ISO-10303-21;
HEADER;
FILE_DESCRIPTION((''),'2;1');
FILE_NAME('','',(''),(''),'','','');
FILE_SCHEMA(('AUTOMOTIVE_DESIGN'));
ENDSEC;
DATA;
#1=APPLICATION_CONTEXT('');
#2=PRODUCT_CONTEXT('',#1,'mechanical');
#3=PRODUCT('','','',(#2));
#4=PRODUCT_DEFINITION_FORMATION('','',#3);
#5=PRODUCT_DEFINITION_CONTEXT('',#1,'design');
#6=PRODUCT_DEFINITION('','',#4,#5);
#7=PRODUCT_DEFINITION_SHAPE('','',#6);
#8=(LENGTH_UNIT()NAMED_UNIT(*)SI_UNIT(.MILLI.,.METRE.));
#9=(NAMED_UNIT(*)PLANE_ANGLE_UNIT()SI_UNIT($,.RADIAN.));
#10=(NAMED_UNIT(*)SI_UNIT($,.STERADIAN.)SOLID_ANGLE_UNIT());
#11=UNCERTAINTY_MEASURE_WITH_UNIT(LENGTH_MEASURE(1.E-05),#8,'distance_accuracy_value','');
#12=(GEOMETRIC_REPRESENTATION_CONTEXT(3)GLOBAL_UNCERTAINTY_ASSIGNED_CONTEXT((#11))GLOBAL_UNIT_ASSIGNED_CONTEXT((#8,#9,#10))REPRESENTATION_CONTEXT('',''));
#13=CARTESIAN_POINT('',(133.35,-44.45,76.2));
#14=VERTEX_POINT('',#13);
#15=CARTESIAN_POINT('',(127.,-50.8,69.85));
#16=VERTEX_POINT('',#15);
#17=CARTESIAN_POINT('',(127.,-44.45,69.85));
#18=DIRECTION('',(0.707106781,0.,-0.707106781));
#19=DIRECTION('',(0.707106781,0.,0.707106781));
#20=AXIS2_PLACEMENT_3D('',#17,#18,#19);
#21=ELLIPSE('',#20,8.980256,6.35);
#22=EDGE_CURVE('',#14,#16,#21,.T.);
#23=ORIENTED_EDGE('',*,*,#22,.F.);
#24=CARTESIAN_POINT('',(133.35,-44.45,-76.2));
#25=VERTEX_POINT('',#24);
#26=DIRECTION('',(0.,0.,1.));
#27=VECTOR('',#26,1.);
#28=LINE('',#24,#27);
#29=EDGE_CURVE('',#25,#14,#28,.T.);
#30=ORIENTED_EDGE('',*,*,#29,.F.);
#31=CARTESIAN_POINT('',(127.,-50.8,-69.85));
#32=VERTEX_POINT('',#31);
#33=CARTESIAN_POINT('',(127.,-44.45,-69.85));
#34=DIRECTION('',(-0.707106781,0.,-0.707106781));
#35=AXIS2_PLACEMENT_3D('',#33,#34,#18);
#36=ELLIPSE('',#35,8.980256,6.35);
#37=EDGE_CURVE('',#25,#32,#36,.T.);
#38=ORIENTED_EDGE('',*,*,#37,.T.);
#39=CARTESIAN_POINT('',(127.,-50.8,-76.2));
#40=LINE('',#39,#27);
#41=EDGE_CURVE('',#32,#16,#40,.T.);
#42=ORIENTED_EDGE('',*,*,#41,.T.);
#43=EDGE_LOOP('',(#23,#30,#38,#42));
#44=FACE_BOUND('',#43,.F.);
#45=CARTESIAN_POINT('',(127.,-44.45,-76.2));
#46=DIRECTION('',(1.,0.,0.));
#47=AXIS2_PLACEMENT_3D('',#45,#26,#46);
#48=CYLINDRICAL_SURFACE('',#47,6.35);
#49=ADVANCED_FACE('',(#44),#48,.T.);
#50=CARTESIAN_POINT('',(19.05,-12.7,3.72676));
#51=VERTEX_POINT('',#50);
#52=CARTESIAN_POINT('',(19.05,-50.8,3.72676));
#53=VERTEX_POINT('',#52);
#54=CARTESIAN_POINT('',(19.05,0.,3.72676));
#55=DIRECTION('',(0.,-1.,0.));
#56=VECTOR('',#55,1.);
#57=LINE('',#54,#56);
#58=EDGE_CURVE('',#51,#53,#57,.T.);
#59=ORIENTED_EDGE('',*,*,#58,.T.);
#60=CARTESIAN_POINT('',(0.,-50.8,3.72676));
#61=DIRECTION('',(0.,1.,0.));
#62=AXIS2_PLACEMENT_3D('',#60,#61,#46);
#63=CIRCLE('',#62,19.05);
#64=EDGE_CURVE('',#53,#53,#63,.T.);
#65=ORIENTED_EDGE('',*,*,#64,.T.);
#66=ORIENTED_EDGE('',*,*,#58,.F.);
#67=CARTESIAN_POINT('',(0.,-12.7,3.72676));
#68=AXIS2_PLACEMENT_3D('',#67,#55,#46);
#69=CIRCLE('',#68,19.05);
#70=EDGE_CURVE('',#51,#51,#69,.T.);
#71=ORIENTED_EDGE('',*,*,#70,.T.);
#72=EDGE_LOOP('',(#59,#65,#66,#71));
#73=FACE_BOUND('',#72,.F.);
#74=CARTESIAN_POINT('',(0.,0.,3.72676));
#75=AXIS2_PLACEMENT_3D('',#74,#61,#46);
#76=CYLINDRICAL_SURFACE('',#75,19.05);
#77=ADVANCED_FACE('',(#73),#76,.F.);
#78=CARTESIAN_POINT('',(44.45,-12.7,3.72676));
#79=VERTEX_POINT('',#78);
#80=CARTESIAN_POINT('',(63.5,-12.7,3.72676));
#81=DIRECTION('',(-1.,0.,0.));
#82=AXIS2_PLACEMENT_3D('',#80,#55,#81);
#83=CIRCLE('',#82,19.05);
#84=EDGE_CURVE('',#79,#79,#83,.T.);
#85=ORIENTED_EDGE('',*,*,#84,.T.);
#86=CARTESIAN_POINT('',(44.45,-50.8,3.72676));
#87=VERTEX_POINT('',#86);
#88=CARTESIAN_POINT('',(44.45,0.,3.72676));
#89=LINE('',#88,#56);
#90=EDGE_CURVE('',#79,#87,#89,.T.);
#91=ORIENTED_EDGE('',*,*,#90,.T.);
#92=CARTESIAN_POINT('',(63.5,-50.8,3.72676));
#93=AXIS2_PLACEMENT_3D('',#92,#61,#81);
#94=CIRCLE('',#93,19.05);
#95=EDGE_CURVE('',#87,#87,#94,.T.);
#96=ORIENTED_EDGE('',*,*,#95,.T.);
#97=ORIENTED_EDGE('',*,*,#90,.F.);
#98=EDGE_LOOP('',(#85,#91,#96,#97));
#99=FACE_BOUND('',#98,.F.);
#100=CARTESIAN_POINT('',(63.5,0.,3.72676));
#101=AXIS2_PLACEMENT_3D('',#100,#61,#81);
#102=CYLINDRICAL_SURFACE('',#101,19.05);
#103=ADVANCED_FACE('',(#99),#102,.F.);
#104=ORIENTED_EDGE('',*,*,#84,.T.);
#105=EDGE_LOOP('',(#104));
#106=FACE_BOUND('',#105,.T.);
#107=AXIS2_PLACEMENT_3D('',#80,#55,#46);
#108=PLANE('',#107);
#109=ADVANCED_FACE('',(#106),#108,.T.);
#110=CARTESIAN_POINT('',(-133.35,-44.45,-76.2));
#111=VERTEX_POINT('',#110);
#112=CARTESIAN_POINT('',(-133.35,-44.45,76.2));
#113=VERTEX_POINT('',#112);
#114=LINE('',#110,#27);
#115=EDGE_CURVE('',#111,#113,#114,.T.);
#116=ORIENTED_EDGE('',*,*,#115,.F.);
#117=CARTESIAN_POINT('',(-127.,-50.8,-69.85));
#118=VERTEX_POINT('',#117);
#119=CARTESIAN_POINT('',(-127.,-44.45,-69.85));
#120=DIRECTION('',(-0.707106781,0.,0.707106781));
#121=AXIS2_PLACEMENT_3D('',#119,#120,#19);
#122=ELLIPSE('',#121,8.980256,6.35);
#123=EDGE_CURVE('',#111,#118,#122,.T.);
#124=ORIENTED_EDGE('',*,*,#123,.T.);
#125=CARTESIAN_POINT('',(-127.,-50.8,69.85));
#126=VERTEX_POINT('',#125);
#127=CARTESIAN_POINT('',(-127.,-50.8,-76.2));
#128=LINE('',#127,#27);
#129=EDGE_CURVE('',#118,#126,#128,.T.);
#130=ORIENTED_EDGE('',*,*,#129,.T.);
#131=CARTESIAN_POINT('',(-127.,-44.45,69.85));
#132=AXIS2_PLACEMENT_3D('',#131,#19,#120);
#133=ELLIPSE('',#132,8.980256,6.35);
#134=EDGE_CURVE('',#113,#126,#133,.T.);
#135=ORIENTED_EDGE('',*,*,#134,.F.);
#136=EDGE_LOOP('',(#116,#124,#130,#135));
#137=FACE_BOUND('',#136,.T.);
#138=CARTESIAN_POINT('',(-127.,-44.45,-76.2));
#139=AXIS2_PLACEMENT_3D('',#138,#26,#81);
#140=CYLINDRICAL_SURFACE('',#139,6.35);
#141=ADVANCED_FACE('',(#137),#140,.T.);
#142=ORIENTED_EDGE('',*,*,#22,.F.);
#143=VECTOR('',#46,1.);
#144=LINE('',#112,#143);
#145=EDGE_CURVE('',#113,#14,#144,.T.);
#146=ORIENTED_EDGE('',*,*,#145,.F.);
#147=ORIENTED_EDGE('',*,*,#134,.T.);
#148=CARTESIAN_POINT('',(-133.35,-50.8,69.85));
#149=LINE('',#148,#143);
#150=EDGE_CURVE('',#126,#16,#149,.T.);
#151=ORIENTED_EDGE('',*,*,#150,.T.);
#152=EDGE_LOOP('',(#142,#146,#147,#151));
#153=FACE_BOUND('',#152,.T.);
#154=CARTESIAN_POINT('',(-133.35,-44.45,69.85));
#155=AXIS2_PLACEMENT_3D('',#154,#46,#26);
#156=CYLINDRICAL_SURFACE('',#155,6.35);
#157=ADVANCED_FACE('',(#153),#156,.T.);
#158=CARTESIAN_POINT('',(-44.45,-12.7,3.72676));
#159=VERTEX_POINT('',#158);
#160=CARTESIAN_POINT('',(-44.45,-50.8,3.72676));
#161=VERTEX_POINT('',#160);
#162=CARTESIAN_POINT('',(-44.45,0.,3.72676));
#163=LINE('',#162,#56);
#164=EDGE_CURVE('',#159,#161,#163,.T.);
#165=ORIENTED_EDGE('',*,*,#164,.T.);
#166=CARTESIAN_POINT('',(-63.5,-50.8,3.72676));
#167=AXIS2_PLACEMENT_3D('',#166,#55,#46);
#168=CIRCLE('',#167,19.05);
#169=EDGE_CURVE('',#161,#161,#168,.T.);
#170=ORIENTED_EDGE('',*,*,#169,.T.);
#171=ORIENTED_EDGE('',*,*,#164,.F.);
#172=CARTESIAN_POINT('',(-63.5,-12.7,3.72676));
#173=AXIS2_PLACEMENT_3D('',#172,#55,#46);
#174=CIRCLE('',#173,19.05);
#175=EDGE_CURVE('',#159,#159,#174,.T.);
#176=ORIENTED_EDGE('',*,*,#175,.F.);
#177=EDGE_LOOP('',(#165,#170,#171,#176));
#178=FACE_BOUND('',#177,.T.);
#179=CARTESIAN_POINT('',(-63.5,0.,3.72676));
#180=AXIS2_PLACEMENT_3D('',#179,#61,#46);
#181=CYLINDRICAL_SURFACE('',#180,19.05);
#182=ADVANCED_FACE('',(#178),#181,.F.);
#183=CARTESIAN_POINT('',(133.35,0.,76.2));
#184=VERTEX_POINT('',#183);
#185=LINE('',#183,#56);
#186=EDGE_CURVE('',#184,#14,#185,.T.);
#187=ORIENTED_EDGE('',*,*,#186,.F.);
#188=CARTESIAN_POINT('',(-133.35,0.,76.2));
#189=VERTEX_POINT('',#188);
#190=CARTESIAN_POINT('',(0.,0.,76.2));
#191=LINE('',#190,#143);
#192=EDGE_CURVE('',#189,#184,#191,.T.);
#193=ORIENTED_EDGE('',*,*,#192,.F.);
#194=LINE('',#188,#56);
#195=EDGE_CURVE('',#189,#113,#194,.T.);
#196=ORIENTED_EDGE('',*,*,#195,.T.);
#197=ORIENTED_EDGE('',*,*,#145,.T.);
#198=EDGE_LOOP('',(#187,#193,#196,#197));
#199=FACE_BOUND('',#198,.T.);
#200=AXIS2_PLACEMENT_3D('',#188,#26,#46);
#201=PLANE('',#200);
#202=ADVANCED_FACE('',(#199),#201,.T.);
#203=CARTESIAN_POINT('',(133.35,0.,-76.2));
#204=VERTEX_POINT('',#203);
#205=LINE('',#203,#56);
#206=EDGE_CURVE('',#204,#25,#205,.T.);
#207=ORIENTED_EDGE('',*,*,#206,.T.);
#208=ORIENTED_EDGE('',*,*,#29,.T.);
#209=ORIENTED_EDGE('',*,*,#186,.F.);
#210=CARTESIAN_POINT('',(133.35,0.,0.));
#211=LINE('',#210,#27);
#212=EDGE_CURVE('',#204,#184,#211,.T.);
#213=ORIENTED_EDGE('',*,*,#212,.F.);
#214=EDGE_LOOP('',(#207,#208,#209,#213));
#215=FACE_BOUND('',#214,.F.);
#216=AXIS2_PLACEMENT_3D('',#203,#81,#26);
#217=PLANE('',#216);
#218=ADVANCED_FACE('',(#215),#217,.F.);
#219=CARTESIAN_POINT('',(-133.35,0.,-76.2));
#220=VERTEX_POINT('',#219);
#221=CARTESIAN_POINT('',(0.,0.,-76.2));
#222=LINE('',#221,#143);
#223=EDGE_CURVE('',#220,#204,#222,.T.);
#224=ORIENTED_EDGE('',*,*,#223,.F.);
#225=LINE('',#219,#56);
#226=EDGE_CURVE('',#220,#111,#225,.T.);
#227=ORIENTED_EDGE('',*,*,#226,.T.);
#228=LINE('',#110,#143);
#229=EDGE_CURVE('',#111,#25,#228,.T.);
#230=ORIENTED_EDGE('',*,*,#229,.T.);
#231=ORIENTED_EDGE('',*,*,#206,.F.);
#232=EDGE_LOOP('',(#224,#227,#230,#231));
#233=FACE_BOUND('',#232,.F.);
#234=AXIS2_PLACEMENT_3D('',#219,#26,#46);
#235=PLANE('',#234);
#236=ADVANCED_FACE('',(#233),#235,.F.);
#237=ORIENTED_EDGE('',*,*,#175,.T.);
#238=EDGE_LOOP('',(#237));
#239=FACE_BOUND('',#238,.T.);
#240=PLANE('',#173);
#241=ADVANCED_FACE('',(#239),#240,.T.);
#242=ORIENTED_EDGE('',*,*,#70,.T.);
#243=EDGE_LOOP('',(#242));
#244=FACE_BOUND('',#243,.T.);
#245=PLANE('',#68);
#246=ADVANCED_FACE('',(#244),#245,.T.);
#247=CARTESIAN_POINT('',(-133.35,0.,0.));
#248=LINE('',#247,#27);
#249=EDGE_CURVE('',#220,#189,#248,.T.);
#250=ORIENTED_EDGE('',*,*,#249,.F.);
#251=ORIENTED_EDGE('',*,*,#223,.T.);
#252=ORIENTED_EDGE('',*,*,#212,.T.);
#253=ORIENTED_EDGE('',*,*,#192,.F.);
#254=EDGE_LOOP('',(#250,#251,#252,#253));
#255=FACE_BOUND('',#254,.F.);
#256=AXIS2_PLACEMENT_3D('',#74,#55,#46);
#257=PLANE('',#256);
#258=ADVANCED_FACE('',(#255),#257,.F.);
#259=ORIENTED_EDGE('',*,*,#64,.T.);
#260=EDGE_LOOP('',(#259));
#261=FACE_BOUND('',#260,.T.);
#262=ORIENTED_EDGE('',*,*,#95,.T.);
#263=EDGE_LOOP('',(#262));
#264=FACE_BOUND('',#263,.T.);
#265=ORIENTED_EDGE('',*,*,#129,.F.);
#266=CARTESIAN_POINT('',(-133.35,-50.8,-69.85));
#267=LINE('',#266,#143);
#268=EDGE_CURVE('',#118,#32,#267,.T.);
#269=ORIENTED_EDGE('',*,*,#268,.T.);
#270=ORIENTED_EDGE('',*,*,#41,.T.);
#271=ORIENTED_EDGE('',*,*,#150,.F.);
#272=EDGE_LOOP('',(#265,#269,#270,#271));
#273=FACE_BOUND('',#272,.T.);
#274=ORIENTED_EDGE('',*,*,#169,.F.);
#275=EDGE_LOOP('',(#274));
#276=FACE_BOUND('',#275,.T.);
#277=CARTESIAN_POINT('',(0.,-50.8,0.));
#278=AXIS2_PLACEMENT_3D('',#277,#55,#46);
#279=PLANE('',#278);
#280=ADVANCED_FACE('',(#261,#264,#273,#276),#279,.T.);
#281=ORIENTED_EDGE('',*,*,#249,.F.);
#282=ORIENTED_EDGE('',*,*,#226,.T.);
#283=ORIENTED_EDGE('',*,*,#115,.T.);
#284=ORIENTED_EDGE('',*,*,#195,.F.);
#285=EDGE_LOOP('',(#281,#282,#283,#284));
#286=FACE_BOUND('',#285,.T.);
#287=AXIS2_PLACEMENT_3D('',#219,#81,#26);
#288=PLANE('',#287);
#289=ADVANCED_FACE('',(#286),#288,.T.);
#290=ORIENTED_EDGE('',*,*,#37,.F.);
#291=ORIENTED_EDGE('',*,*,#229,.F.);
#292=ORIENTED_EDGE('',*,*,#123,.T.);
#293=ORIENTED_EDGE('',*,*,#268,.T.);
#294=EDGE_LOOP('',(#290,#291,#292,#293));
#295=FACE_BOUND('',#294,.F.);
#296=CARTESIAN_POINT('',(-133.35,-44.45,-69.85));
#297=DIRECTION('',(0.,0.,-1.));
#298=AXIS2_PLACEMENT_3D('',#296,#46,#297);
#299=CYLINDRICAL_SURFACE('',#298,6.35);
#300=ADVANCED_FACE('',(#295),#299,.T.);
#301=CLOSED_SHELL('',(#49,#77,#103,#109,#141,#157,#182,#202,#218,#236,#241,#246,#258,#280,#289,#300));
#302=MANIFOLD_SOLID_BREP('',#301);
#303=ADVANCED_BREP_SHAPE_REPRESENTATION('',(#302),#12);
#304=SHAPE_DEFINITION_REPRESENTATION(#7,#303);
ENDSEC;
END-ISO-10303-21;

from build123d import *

# Parameters (mm, degrees)
F0_W     = 266.7
F0_H     = 152.4
F0_R     = 19.05
F1_DEPTH = 50.8
F2_DEPTH = 12.7
F3_R     = 6.35


with BuildPart() as f1:
    # F0 (on Front) → F1 (new body)
    with BuildSketch(Plane.XZ):
        Rectangle(F0_W, F0_H)
        with Locations((-63.5, 3.7267601583)):
            Circle(F0_R, mode=Mode.SUBTRACT)
        with BuildLine():
            ThreePointArc((-19.05, 3.7267601583), (0, 22.7767601583), (19.05, 3.7267601583))
            ThreePointArc((19.05, 3.7267601583), (0, -15.3232398417), (-19.05, 3.7267601583))
        make_face(mode=Mode.SUBTRACT)
        with BuildLine():
            ThreePointArc((82.55, 3.7267601583), (63.5, -15.3232398417), (44.45, 3.7267601583))
            ThreePointArc((44.45, 3.7267601583), (63.5, 22.7767601583), (82.55, 3.7267601583))
        make_face(mode=Mode.SUBTRACT)
    extrude(amount=F1_DEPTH)

    # F0 (on Front) → F2 (join)
    with BuildSketch(Plane.XZ):
        with BuildLine():
            ThreePointArc((-19.05, 3.7267601583), (0, -15.3232398417), (19.05, 3.7267601583))
            ThreePointArc((19.05, 3.7267601583), (0, 22.7767601583), (-19.05, 3.7267601583))
        make_face()
        with Locations((-63.5, 3.7267601583)):
            Circle(F0_R)
        with BuildLine():
            ThreePointArc((82.55, 3.7267601583), (63.5, 22.7767601583), (44.45, 3.7267601583))
            ThreePointArc((44.45, 3.7267601583), (63.5, -15.3232398417), (82.55, 3.7267601583))
        make_face()
    extrude(amount=F2_DEPTH)

    # F3
    f3_edges = [f1.edges().sort_by_distance(p)[0] for p in [
        (-133.35, -50.8, 0),
        (0, -50.8, -76.2),
        (133.35, -50.8, 0),
        (0, -50.8, 76.2),
    ]]
    fillet(f3_edges, radius=F3_R)


solid = f1.part
